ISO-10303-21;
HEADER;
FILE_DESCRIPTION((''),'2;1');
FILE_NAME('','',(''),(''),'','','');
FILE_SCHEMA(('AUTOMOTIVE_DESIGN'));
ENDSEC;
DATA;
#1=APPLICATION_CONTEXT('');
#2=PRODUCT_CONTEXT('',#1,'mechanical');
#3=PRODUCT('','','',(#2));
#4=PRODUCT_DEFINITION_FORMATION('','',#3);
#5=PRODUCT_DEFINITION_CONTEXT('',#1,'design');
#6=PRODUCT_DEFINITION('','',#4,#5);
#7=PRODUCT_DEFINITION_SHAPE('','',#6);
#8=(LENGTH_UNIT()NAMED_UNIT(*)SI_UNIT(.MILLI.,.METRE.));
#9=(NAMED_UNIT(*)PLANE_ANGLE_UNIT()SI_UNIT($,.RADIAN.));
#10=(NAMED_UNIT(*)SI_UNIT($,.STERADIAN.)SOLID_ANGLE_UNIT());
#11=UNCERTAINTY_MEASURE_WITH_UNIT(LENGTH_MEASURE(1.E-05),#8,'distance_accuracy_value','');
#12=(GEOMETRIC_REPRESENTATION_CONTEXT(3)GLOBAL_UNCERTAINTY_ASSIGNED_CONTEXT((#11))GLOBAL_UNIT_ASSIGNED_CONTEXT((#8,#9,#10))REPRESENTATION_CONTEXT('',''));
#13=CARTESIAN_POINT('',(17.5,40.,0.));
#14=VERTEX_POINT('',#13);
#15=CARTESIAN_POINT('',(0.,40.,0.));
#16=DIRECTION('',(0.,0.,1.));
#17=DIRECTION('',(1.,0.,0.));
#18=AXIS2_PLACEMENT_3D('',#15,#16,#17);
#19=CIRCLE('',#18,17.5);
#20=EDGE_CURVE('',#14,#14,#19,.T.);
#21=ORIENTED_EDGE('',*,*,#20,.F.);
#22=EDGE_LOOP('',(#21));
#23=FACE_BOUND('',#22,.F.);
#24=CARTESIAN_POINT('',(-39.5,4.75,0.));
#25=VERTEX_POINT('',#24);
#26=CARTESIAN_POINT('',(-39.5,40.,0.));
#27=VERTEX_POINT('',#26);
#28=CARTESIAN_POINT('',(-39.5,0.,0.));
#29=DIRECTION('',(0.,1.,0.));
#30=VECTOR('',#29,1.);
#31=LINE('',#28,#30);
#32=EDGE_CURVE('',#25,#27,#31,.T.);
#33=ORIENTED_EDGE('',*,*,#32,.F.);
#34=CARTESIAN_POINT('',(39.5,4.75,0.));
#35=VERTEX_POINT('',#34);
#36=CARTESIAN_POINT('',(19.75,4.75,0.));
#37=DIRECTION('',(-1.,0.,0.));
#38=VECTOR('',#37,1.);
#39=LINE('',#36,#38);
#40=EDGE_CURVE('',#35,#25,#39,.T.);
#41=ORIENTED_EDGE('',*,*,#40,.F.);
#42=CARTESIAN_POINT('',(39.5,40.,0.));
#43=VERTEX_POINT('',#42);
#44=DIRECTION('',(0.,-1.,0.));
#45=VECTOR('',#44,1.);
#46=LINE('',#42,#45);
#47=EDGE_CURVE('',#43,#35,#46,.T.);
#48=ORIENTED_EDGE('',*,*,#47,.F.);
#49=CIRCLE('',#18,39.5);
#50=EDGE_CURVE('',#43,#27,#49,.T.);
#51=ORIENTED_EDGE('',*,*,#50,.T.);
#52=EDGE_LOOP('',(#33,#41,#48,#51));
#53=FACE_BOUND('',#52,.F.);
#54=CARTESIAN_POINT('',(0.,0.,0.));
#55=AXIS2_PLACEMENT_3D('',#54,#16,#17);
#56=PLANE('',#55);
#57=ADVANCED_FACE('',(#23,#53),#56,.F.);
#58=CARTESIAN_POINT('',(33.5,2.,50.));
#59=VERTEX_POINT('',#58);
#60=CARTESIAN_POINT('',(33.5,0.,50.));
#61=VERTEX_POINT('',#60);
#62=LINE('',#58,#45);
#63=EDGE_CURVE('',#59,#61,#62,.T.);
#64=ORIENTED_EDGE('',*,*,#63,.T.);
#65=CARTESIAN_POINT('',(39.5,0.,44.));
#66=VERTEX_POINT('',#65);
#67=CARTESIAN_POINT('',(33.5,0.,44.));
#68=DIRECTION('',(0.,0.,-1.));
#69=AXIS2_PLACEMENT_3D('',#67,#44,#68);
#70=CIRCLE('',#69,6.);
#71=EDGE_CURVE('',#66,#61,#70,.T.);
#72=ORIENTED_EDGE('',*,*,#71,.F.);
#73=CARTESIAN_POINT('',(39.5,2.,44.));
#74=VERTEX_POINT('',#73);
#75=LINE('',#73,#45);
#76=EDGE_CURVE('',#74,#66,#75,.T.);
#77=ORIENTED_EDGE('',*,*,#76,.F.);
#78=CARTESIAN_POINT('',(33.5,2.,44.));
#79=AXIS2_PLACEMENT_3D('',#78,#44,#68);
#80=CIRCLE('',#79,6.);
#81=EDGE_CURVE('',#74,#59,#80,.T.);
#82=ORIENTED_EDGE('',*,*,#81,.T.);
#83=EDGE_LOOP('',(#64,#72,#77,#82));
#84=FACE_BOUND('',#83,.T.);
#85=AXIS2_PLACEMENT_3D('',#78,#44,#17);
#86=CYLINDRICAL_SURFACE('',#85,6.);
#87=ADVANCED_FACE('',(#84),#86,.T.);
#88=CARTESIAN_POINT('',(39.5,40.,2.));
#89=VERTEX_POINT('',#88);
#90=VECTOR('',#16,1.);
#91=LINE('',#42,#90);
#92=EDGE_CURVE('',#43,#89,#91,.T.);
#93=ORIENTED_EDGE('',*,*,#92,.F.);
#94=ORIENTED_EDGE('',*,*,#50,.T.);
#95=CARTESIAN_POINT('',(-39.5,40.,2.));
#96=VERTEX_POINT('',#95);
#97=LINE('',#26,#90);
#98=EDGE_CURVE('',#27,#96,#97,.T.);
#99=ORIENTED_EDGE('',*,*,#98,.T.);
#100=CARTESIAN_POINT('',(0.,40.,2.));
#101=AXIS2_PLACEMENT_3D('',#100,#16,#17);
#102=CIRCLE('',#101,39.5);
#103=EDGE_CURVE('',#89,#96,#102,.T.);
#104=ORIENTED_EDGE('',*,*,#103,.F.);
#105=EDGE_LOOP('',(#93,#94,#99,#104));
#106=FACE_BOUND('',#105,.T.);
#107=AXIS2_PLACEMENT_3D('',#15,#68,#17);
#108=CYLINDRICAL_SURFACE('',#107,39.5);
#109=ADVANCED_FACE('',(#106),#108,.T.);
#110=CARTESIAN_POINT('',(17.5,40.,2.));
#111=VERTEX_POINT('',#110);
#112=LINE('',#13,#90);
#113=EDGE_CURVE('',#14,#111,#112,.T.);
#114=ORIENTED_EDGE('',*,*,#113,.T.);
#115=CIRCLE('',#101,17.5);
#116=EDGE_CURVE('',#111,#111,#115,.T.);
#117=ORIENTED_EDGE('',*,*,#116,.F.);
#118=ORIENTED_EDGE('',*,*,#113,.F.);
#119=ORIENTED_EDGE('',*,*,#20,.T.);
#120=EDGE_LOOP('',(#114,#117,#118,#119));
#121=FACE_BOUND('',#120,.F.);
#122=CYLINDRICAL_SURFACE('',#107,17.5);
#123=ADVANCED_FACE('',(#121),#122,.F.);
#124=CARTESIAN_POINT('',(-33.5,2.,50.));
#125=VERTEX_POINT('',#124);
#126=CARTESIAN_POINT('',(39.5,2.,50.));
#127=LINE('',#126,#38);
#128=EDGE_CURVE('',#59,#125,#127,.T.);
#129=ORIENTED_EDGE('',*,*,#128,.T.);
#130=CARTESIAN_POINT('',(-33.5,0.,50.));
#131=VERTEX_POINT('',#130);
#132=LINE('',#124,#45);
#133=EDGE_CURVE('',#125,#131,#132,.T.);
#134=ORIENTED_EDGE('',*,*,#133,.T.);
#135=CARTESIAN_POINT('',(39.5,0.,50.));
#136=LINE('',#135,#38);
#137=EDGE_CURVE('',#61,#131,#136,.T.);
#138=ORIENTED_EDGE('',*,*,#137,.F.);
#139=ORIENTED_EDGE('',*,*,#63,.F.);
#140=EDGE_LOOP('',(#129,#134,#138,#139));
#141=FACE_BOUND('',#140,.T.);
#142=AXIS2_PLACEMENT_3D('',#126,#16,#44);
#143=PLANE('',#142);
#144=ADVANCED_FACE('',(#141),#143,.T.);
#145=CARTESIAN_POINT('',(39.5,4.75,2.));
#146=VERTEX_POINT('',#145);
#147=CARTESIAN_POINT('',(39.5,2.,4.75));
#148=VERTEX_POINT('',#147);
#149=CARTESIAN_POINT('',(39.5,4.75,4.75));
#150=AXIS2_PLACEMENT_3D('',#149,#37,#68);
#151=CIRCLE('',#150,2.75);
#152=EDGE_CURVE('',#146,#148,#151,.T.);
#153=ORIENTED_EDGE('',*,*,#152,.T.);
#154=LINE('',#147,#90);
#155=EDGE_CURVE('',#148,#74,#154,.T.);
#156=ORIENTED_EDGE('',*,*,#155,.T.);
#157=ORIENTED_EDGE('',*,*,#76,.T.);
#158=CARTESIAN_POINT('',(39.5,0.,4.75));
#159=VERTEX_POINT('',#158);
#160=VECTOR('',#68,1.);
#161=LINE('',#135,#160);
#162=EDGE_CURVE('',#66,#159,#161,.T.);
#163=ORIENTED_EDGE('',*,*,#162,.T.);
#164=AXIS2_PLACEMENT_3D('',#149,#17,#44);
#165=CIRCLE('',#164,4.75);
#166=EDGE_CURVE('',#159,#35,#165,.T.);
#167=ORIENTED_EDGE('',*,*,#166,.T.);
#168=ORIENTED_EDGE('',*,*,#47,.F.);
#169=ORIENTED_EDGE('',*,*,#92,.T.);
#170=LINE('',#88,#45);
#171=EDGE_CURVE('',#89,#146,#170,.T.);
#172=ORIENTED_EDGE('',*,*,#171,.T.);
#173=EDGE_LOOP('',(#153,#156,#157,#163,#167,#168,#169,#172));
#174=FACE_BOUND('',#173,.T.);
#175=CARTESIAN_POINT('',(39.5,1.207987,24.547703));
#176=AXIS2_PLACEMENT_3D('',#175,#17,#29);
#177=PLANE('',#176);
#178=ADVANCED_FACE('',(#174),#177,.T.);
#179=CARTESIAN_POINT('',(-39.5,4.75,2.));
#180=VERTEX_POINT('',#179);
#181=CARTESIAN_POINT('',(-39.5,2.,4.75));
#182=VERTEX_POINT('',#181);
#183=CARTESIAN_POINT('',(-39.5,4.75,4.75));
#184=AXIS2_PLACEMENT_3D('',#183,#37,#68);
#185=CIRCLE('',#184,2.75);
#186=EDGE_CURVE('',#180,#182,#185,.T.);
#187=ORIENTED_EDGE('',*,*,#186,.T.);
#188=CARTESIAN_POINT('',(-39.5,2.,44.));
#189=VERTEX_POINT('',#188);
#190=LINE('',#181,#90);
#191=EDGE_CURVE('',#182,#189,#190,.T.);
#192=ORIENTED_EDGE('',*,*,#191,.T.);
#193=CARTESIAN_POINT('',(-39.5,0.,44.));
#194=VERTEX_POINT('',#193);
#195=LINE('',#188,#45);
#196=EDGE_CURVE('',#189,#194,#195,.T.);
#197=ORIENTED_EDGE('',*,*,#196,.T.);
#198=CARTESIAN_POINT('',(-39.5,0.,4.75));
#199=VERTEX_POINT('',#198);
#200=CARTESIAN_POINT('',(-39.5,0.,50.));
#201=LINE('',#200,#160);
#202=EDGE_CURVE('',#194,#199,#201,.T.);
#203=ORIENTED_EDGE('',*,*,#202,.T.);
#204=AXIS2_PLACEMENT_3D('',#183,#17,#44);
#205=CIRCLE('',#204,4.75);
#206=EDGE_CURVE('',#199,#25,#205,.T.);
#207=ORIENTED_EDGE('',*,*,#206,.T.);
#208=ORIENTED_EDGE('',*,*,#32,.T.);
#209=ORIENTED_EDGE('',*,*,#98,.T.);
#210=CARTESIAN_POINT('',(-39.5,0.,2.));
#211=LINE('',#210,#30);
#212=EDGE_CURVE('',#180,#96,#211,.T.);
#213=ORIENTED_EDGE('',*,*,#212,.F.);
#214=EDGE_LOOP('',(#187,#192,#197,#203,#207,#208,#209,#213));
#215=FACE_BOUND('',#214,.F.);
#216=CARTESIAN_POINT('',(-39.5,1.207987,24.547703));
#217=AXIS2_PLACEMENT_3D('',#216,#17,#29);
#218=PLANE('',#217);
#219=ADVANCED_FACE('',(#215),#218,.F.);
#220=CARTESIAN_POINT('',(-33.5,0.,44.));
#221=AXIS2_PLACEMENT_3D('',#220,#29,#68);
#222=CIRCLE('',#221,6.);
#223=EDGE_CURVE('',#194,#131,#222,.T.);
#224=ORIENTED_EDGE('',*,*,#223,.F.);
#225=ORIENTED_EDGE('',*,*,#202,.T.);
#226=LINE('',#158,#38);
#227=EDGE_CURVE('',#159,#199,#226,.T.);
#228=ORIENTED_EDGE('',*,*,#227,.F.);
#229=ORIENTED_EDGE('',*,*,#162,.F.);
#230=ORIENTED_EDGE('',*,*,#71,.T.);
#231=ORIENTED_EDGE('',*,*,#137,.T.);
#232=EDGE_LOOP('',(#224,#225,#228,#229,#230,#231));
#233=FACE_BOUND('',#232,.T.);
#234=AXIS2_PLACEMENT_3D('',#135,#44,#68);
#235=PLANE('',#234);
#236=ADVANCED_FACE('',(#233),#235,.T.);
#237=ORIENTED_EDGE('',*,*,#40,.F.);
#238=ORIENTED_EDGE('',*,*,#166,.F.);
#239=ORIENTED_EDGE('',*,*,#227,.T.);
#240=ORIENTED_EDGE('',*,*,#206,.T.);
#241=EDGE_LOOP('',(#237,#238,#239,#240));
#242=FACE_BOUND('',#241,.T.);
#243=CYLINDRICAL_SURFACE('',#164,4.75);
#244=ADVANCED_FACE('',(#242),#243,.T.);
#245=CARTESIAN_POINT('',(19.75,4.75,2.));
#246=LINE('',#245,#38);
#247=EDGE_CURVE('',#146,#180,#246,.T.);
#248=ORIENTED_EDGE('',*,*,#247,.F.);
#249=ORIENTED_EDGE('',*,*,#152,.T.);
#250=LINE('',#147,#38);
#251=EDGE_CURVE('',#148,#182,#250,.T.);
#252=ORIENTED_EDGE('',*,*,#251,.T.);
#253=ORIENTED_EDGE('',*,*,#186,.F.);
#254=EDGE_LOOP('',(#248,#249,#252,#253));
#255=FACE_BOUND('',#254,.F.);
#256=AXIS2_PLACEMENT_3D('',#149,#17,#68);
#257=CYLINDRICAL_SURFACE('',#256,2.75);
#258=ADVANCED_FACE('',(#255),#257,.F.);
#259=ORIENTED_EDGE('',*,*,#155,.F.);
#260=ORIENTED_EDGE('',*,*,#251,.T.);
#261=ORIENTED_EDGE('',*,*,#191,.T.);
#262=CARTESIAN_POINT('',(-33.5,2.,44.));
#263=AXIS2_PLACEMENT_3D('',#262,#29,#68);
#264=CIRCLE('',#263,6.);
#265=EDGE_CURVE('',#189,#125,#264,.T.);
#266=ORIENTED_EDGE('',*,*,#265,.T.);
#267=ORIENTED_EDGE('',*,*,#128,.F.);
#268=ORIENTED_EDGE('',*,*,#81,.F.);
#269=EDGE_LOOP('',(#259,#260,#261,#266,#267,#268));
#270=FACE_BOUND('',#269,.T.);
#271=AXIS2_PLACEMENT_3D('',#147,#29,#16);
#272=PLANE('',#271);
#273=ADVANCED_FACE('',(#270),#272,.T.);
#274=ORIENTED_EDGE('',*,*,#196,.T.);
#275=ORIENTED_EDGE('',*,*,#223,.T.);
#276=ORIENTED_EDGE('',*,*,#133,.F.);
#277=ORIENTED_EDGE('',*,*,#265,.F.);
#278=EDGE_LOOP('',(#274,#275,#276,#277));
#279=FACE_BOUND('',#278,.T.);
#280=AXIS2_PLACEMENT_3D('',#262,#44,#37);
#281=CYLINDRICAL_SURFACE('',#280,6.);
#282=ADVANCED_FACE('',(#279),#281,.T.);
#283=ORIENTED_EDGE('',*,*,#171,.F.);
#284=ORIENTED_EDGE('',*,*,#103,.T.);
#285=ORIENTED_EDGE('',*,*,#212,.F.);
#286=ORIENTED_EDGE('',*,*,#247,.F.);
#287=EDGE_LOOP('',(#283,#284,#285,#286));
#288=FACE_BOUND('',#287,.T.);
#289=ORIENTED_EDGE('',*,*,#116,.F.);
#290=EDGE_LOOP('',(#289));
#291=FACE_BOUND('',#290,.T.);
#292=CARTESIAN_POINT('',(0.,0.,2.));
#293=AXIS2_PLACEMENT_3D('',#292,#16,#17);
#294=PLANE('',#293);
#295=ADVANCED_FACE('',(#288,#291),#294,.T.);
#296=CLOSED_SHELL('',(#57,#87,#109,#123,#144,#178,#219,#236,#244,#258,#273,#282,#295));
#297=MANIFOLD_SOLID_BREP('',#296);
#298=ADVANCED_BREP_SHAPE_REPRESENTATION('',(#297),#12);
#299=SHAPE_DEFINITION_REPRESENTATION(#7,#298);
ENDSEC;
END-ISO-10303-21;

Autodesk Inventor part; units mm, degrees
ref_plane "YZ Plane" through (0, 0, 0) normal (1, 0, 0) x (0, 1, 0)
ref_plane "XZ Plane" through (0, 0, 0) normal (0, 1, 0) x (-1, 0, 0)
ref_plane "XY Plane" through (0, 0, 0) normal (0, 0, 1) x (1, 0, 0)
sketch "Sketch1" plane through (0, 0, 0) normal (0, 0, 1) x (1, 0, 0)
  line L0 (-39.5, 0) -> (39.5, 0)
  line L1 (-39.5, 0) -> (-39.5, 40)
  arc A0 (39.5, 40) -> (-39.5, 40) centre (0, 40) ccw
  line L2 (39.5, 40) -> (39.5, 0)
  circle A1 centre (0, 40) radius 17.5
  point P0 (0, 0)
  point P1 (0, 0)
  dimension "d6" = 35
  dimension "d7" = 22
  dimension "d8" = 40
extrude "Plate1" add sketch "Sketch1" along normal blind 2
sketch "Sketch3" plane through (39.5, 2, 0) normal (0, -1, 0) x (1, 0, 0)
  line L0 (-79, 0) -> (0, 0)
  line L1 (0, 0) -> (0, 50)
  line L2 (0, 50) -> (-79, 50)
  line L3 (-79, 50) -> (-79, 0)
edge flange "Flange1" height 50 angle 90 thickness 2 bend radius 2.75 thickness toward (0, -1, 0) relief round relief width 2 relief depth 1 edges at (0, 0, 2) wall of the first edge with corners at (-39.5, 2, 0) (39.5, 2, 0) (39.5, 2, 50) (-39.5, 2, 50)
bend "Bend1"
corner "Corner1"
fillet "Corner Round1" radius 6 2 edges at (39.5, 1, 50) (-39.5, 1, 50)
equation "\"d2\" = Thickness"
equation "\"d9\" = BendReliefWidth"
equation "\"d10\" = BendReliefDepth"
equation "\"d11\" = MinimumRemnant"
equation "\"d12\" = TransitionRadius"
equation "\"d15\" = BendRadius"
equation "\"d16\" = CornerReliefSize"
equation "\"d17\" = GapSize"
equation "\"d18\" = JacobiRadiusSize"
equation "\"BendReliefWidth\" = Thickness"
equation "\"BendReliefDepth\" = 0.5 * Thickness"
equation "\"CornerReliefSize\" = 4 * Thickness"
equation "\"MinimumRemnant\" = 2 * Thickness"
equation "\"TransitionRadius\" = BendRadius"
equation "\"JacobiRadiusSize\" = BendRadius"
equation "\"GapSize\" = Thickness"
equation "\"Thickness\" = 2"
equation "\"BendRadius\" = 2.75"
properties part number "D-ring 11" material "Stainless Steel"
